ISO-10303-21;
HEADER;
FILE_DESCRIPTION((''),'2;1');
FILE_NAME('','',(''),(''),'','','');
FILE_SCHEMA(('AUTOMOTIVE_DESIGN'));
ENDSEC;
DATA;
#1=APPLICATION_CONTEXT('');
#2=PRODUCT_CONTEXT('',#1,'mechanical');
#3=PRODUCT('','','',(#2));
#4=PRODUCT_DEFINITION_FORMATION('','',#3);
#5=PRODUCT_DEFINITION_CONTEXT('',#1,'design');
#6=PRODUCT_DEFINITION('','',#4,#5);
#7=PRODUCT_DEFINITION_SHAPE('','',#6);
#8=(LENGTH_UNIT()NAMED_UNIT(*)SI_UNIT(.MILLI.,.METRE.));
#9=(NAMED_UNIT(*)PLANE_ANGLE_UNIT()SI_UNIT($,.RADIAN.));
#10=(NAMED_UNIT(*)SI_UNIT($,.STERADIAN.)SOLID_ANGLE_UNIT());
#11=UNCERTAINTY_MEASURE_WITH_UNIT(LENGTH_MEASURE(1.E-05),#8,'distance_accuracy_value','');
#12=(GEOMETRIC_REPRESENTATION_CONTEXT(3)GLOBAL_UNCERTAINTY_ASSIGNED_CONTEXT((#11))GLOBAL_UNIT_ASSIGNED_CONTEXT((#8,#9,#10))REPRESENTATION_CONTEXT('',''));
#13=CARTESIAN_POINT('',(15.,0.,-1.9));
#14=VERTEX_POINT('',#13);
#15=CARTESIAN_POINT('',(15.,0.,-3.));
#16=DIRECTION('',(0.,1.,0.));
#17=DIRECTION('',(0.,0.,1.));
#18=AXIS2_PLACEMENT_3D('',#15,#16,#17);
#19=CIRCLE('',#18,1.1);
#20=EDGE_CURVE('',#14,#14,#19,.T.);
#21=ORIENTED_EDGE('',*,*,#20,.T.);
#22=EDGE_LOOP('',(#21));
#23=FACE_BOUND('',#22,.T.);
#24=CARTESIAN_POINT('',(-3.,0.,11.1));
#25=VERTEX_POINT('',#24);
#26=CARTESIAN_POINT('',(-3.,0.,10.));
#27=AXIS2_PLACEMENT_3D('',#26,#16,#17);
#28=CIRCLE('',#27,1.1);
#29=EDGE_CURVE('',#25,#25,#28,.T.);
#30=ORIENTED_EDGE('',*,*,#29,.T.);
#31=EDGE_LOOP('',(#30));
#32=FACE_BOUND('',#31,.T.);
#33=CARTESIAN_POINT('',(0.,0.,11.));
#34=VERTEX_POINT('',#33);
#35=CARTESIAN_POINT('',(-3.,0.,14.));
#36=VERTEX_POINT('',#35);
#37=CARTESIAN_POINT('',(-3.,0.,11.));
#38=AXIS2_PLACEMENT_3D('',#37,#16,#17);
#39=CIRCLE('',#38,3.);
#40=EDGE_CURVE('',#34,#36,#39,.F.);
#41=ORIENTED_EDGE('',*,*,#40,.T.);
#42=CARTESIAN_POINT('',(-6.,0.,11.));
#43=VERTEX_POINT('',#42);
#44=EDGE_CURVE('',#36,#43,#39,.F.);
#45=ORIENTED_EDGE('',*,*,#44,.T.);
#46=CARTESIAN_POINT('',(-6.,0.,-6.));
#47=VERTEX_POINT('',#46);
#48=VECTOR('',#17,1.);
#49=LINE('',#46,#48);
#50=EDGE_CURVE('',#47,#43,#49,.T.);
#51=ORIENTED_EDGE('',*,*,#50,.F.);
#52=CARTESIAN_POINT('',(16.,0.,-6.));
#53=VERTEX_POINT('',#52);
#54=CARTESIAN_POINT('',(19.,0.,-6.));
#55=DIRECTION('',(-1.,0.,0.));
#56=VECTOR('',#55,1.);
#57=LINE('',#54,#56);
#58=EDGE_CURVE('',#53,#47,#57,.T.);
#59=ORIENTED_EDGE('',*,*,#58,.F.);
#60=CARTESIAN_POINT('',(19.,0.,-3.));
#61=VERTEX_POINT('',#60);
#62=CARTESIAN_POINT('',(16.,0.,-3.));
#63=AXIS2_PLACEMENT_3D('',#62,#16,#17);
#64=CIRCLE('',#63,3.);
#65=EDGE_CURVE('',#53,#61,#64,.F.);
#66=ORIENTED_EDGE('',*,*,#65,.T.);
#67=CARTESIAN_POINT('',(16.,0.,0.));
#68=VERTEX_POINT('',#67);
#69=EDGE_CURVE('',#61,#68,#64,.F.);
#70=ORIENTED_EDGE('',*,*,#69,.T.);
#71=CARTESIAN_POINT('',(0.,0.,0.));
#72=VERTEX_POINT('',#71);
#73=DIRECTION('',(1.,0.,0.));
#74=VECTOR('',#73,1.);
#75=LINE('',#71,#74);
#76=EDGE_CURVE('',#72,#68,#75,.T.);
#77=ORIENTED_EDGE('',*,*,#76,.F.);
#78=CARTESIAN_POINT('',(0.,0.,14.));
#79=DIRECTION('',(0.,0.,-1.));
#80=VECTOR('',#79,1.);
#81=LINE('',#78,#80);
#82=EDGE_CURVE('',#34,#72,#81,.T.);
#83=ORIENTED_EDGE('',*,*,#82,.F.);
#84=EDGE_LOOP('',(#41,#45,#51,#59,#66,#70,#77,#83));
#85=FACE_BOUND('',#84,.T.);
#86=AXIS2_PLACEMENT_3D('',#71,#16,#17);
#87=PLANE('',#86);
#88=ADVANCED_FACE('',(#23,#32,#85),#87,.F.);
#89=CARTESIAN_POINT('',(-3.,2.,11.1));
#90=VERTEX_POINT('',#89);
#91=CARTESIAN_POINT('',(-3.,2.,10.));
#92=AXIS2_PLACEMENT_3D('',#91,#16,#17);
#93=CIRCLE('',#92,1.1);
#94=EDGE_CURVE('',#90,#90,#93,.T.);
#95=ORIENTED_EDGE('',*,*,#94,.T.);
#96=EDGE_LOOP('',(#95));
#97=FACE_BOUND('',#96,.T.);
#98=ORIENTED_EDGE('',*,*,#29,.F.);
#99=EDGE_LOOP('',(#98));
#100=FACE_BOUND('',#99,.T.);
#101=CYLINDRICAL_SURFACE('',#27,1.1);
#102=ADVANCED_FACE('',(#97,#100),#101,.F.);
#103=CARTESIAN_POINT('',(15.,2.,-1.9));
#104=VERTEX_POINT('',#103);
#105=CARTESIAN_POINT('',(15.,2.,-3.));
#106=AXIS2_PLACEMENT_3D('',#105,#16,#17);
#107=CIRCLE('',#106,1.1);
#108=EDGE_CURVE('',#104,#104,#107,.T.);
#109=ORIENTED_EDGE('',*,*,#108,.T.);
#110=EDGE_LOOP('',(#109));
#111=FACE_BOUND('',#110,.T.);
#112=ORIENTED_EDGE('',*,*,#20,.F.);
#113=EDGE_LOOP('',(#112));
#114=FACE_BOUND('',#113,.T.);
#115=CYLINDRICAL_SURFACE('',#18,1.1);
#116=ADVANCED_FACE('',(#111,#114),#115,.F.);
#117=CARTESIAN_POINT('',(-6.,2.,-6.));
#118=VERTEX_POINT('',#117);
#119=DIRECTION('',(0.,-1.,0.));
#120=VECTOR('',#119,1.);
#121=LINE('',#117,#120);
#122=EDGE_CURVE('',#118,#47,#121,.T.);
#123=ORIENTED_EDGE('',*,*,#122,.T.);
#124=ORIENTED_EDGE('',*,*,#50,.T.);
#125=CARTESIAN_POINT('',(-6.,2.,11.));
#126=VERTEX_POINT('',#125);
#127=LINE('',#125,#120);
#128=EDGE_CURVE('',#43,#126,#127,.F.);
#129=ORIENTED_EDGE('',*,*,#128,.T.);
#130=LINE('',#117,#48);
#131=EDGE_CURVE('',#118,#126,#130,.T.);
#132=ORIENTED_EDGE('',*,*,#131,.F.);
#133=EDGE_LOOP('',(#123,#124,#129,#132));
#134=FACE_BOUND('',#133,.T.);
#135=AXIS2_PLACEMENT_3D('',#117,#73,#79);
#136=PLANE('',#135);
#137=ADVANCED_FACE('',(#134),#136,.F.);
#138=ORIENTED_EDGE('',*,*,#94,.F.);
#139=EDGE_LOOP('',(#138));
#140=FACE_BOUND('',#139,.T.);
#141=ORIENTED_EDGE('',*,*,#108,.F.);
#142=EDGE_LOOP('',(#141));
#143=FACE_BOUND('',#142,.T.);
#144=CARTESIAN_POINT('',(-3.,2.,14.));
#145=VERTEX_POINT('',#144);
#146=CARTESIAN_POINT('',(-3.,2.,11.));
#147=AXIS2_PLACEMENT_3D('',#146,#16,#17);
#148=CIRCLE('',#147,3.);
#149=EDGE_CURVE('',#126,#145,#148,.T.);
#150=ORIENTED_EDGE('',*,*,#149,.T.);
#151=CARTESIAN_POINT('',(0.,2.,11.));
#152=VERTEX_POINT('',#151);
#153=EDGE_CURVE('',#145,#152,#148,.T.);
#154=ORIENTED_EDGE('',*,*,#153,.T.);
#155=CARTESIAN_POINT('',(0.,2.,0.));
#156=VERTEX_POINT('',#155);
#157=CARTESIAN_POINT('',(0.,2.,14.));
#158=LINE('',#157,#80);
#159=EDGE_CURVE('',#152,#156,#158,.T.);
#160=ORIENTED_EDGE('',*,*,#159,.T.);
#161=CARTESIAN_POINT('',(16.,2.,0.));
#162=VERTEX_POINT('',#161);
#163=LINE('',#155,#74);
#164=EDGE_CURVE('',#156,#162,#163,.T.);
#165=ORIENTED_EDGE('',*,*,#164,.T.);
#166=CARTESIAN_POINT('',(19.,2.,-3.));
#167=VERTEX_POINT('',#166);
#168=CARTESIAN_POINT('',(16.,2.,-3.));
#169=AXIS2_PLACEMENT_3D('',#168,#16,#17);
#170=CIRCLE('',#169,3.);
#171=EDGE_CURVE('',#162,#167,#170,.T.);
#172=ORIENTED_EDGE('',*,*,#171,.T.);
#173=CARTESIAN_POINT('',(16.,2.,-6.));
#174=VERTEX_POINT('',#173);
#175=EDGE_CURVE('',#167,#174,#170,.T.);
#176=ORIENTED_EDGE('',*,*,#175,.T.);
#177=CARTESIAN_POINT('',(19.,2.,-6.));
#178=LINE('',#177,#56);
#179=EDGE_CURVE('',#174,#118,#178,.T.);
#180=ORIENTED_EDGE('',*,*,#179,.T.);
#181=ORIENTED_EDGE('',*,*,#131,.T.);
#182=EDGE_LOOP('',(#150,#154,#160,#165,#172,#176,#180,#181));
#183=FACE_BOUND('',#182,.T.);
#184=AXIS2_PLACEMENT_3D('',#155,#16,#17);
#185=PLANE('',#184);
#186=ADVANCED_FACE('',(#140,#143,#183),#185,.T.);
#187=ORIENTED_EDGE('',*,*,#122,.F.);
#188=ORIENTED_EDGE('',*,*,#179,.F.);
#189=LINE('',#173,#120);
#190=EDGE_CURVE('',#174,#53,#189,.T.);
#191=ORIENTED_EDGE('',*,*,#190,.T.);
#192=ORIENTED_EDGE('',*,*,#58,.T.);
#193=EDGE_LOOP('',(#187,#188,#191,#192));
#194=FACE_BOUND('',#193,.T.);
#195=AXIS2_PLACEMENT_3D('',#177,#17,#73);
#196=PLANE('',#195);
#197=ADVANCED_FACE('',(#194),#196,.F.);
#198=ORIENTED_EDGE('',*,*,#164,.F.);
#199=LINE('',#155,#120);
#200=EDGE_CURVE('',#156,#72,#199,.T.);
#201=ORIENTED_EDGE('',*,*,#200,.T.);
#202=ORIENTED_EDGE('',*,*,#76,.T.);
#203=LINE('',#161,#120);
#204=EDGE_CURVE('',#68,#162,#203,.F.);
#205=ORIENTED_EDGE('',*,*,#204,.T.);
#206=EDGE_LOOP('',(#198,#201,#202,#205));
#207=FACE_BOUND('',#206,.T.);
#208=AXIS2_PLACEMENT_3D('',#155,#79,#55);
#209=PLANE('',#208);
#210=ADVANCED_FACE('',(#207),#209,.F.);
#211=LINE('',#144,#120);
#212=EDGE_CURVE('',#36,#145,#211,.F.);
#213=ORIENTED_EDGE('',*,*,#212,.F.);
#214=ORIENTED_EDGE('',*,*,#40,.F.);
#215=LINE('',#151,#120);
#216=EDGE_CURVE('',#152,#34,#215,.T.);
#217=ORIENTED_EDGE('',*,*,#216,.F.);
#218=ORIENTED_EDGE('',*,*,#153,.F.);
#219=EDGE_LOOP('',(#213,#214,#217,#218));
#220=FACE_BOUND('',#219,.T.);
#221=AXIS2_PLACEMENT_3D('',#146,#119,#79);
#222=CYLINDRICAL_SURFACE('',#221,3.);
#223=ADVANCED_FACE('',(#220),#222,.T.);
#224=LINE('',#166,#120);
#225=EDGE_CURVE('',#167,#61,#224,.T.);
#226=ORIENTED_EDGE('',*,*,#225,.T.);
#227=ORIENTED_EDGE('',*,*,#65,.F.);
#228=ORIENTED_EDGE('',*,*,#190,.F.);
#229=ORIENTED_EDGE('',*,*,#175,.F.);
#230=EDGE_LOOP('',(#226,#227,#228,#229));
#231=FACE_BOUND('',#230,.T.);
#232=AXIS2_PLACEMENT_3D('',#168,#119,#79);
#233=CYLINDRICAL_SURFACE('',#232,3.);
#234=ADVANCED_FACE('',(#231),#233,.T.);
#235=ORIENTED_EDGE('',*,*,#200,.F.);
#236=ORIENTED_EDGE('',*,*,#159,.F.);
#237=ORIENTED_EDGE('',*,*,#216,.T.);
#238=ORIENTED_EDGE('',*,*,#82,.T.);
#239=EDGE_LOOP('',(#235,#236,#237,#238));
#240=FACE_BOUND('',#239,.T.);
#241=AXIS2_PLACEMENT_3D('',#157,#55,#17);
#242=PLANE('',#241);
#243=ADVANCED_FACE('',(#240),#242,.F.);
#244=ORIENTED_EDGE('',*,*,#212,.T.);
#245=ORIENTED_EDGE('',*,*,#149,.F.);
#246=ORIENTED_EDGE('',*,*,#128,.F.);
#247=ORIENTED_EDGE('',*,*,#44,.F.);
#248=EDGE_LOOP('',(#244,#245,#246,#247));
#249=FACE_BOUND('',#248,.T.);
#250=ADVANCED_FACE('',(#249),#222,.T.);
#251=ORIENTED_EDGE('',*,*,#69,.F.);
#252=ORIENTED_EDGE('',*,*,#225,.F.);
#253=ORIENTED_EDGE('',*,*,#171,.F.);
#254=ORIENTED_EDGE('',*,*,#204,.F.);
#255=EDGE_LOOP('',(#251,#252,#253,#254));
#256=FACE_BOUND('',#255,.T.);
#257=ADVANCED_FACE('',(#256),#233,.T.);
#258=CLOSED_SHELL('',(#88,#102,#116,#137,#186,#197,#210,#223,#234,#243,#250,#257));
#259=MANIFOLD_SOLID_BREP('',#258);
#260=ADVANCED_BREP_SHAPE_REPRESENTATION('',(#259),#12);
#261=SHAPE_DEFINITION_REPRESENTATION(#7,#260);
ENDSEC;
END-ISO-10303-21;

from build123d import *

# Parameters (mm, degrees)
BOSS_EXTRUDE1_DEPTH = 2
SKETCH2_R           = 1.1
CUT_EXTRUDE1_DEPTH  = 2
FILLET1_R           = 3


with BuildPart() as part:
    # Sketch1 → Boss-Extrude1 (new body)
    with BuildSketch(Plane(origin=(0, 0, 0), x_dir=(1, 0, 0), z_dir=(0, 1, 0))):
        Polygon((-6, 6), (-6, -14), (0, -14), (0, 0), (19, 0), (19, 6), align=None)
    extrude(amount=BOSS_EXTRUDE1_DEPTH)

    # Sketch2 → Cut-Extrude1 (cut)
    with BuildSketch(Plane(origin=(0, 2, 0), x_dir=(1, 0, 0), z_dir=(0, 1, 0))):
        with Locations(Location((-3, -10, 0), (0, 0, 270))):
            Circle(SKETCH2_R)
        with Locations(Location((15, 3, 0), (0, 0, 270))):
            Circle(SKETCH2_R)
    extrude(amount=-CUT_EXTRUDE1_DEPTH, mode=Mode.SUBTRACT)

    # Fillet1
    fillet1_edges = [part.edges().sort_by_distance(p)[0] for p in [
        (19, 1, -6),
        (19, 1, 0),
        (-6, 1, 14),
        (0, 1, 14),
    ]]
    fillet(fillet1_edges, radius=FILLET1_R - 0.0001)  # a hair under: the kernel refuses the full size


solid = part.part
